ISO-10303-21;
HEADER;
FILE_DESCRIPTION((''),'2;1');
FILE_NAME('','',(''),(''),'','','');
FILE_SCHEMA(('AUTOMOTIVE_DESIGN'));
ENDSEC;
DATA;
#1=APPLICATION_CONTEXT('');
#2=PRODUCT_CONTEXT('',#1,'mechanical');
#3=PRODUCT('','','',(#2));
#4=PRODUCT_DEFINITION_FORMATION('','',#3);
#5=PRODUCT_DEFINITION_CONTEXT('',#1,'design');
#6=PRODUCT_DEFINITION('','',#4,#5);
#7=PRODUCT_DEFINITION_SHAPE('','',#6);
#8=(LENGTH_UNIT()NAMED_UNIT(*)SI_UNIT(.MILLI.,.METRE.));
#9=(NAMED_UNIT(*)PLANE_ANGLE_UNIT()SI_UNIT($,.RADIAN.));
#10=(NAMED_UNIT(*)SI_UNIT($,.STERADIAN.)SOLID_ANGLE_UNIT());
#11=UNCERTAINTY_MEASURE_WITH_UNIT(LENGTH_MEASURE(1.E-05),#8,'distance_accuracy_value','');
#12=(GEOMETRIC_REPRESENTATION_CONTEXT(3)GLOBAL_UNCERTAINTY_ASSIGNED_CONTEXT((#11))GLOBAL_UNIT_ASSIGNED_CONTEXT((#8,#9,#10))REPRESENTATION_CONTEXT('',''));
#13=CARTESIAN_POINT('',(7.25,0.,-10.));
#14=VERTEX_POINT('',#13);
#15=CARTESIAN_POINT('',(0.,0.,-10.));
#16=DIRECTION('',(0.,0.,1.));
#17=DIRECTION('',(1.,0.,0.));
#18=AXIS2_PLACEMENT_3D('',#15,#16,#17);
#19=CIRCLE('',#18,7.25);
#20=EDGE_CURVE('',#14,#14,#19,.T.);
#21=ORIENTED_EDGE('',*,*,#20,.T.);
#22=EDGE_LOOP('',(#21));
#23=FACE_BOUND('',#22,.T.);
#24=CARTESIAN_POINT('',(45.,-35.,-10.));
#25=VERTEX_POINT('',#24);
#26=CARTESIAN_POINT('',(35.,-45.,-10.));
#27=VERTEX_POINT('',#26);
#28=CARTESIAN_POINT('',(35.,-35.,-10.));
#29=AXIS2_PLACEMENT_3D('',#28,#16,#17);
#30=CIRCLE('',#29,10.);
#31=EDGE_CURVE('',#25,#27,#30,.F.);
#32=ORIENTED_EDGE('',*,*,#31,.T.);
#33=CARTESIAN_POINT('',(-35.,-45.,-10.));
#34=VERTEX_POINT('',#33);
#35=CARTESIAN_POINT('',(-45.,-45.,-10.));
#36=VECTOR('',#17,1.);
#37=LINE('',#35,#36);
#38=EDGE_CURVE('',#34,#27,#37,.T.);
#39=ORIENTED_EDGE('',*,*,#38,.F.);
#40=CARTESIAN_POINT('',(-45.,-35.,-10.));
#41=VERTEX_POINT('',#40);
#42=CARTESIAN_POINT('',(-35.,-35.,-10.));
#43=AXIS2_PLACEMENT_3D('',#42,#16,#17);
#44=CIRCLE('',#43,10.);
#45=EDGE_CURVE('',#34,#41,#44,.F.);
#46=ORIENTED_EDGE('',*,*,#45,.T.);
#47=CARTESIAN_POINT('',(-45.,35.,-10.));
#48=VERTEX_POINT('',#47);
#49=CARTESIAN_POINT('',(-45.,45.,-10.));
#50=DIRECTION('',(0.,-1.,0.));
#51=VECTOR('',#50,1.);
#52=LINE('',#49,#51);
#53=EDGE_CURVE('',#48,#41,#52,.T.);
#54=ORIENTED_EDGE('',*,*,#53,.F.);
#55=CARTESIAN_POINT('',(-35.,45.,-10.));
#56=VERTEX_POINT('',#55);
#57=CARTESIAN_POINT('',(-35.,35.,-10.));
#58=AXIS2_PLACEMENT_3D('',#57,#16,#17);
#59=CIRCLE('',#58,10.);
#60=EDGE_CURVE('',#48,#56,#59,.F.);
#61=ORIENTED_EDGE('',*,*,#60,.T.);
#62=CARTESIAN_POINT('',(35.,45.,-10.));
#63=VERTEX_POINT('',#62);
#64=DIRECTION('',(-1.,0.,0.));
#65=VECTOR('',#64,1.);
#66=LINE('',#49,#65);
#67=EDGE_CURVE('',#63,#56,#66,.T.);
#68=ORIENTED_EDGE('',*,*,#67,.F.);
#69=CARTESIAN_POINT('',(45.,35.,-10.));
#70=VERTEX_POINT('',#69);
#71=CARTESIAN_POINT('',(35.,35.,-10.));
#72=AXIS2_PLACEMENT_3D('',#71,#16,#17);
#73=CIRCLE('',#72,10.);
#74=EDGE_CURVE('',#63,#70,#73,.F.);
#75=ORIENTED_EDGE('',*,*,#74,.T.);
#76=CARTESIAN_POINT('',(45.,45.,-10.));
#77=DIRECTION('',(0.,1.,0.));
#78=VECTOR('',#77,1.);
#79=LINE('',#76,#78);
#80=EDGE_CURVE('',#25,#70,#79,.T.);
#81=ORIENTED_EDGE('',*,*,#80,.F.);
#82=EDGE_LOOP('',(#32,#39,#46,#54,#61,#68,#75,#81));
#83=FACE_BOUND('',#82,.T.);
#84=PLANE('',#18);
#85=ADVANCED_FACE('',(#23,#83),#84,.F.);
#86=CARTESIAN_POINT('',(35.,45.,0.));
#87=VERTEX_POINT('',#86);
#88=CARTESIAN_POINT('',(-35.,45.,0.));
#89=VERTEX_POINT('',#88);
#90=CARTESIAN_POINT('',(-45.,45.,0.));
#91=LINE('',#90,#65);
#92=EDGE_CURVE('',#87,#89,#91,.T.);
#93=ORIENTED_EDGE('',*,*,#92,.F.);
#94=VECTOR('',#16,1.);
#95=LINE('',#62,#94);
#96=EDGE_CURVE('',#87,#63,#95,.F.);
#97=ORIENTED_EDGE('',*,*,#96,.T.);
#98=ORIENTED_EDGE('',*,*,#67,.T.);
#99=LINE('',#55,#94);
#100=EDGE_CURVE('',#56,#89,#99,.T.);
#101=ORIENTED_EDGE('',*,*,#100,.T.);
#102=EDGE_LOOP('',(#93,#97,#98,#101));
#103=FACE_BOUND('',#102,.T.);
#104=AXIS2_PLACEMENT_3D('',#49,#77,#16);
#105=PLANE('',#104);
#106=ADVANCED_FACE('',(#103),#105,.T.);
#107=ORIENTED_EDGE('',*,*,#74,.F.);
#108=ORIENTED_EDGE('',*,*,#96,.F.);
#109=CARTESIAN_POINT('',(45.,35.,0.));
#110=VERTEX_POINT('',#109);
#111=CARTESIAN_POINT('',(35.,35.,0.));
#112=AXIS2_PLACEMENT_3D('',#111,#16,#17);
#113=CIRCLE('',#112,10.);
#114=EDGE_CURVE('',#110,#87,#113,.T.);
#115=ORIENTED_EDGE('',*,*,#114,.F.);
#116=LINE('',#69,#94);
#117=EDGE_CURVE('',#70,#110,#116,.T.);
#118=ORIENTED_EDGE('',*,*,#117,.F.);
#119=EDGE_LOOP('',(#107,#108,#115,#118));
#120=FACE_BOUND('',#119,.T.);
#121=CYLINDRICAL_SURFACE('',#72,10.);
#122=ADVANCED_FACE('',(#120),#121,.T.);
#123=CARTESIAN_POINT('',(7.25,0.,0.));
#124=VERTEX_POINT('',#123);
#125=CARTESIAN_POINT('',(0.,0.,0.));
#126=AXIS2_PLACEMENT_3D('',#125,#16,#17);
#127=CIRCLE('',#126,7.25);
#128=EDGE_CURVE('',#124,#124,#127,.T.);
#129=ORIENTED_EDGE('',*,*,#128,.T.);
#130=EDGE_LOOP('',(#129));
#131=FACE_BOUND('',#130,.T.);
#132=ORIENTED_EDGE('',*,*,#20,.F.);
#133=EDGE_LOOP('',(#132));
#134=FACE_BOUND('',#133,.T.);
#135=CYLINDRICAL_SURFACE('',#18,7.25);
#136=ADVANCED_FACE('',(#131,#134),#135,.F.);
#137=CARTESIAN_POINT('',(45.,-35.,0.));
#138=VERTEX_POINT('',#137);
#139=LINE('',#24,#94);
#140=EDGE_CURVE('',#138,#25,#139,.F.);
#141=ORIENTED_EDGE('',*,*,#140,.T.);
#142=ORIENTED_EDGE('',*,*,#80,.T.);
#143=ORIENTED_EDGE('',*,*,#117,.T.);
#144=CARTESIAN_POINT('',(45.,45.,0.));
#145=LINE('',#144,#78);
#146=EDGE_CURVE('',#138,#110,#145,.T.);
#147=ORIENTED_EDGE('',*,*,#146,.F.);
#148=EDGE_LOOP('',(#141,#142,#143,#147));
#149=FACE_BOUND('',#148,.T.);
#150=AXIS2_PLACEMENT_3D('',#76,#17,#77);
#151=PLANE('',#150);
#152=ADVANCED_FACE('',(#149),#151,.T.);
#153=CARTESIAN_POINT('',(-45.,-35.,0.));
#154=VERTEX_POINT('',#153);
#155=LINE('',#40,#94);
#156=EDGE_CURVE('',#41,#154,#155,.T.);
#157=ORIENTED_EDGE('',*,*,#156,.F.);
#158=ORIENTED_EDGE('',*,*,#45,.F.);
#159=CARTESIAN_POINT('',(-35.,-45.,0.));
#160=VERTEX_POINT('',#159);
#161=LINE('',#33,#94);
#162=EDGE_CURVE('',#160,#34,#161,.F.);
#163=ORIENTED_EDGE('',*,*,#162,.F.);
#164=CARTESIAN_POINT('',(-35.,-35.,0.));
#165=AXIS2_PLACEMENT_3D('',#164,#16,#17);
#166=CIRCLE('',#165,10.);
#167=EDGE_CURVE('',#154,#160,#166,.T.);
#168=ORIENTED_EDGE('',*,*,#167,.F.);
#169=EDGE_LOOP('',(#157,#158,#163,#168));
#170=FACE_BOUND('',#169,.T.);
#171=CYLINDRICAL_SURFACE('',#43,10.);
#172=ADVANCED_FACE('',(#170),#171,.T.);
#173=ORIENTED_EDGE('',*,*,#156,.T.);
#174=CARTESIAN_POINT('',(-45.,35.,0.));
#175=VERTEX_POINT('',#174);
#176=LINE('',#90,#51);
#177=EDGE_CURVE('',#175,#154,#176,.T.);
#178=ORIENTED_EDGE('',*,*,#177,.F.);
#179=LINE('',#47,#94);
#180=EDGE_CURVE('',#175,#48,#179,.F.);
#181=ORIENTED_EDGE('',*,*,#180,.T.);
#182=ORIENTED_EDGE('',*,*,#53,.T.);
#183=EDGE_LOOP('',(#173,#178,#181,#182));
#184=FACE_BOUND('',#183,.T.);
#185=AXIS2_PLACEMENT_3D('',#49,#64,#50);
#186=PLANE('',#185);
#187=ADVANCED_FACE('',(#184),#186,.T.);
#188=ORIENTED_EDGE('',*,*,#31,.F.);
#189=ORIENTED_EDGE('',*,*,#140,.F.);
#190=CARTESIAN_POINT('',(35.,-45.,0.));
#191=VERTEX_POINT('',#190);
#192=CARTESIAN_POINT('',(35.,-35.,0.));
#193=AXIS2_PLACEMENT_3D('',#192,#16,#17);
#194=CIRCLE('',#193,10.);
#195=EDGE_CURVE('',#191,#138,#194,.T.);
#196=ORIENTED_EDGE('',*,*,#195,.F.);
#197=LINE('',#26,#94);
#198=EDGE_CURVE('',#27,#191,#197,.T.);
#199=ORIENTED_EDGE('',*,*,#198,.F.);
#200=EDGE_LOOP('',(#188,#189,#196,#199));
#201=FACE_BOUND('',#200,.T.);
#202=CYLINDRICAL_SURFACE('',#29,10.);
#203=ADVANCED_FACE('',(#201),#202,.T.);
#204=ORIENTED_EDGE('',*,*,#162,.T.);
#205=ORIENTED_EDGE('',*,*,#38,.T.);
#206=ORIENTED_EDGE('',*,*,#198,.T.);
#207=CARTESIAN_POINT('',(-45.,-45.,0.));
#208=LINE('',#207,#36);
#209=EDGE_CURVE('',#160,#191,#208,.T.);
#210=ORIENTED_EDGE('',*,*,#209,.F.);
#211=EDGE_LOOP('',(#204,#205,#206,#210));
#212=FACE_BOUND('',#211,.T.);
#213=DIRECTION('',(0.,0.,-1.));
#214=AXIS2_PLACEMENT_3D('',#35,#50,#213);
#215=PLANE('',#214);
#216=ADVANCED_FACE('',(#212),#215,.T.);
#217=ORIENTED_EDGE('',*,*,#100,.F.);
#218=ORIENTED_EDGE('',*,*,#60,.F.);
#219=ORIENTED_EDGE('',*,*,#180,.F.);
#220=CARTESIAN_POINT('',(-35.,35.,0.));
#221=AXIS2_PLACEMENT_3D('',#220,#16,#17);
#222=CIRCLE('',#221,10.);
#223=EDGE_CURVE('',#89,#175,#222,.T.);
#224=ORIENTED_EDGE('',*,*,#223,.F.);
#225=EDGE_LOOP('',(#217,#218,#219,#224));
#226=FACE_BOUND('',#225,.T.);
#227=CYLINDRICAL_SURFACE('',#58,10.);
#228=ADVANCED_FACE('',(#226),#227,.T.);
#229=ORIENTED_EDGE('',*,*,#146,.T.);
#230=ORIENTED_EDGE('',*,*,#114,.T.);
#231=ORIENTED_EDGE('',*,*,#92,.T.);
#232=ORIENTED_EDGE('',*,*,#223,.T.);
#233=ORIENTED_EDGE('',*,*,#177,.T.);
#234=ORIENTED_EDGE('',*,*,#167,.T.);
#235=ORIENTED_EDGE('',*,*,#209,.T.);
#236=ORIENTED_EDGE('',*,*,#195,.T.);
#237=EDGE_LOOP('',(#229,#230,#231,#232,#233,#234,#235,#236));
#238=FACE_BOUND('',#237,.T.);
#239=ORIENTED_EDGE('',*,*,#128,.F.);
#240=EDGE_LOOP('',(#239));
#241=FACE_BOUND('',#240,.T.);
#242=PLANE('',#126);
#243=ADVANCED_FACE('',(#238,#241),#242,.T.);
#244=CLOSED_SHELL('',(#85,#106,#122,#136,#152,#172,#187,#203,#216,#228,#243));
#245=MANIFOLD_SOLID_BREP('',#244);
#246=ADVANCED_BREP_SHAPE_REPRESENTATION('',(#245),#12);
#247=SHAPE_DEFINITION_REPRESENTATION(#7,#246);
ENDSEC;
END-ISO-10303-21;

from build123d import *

# Parameters (mm, degrees)
IZIM1_W            = 90
IZIM1_H            = 90
IZIM1_R            = 7.25
TABAN_FLAN_1_DEPTH = 10
RADYUS1_R          = 10


# Sheet-metal steps are written as plain solids
with BuildPart() as part:
    # Çizim1 → Taban-Flanş1 (new body)
    with BuildSketch(Plane.XY):
        Rectangle(IZIM1_W, IZIM1_H)
        Circle(IZIM1_R, mode=Mode.SUBTRACT)
    extrude(amount=-TABAN_FLAN_1_DEPTH)

    # Radyus1
    radyus1_edges = [part.edges().sort_by_distance(p)[0] for p in [
        (45, -45, -5),
        (-45, -45, -5),
        (-45, 45, -5),
        (45, 45, -5),
    ]]
    fillet(radyus1_edges, radius=RADYUS1_R)


solid = part.part
